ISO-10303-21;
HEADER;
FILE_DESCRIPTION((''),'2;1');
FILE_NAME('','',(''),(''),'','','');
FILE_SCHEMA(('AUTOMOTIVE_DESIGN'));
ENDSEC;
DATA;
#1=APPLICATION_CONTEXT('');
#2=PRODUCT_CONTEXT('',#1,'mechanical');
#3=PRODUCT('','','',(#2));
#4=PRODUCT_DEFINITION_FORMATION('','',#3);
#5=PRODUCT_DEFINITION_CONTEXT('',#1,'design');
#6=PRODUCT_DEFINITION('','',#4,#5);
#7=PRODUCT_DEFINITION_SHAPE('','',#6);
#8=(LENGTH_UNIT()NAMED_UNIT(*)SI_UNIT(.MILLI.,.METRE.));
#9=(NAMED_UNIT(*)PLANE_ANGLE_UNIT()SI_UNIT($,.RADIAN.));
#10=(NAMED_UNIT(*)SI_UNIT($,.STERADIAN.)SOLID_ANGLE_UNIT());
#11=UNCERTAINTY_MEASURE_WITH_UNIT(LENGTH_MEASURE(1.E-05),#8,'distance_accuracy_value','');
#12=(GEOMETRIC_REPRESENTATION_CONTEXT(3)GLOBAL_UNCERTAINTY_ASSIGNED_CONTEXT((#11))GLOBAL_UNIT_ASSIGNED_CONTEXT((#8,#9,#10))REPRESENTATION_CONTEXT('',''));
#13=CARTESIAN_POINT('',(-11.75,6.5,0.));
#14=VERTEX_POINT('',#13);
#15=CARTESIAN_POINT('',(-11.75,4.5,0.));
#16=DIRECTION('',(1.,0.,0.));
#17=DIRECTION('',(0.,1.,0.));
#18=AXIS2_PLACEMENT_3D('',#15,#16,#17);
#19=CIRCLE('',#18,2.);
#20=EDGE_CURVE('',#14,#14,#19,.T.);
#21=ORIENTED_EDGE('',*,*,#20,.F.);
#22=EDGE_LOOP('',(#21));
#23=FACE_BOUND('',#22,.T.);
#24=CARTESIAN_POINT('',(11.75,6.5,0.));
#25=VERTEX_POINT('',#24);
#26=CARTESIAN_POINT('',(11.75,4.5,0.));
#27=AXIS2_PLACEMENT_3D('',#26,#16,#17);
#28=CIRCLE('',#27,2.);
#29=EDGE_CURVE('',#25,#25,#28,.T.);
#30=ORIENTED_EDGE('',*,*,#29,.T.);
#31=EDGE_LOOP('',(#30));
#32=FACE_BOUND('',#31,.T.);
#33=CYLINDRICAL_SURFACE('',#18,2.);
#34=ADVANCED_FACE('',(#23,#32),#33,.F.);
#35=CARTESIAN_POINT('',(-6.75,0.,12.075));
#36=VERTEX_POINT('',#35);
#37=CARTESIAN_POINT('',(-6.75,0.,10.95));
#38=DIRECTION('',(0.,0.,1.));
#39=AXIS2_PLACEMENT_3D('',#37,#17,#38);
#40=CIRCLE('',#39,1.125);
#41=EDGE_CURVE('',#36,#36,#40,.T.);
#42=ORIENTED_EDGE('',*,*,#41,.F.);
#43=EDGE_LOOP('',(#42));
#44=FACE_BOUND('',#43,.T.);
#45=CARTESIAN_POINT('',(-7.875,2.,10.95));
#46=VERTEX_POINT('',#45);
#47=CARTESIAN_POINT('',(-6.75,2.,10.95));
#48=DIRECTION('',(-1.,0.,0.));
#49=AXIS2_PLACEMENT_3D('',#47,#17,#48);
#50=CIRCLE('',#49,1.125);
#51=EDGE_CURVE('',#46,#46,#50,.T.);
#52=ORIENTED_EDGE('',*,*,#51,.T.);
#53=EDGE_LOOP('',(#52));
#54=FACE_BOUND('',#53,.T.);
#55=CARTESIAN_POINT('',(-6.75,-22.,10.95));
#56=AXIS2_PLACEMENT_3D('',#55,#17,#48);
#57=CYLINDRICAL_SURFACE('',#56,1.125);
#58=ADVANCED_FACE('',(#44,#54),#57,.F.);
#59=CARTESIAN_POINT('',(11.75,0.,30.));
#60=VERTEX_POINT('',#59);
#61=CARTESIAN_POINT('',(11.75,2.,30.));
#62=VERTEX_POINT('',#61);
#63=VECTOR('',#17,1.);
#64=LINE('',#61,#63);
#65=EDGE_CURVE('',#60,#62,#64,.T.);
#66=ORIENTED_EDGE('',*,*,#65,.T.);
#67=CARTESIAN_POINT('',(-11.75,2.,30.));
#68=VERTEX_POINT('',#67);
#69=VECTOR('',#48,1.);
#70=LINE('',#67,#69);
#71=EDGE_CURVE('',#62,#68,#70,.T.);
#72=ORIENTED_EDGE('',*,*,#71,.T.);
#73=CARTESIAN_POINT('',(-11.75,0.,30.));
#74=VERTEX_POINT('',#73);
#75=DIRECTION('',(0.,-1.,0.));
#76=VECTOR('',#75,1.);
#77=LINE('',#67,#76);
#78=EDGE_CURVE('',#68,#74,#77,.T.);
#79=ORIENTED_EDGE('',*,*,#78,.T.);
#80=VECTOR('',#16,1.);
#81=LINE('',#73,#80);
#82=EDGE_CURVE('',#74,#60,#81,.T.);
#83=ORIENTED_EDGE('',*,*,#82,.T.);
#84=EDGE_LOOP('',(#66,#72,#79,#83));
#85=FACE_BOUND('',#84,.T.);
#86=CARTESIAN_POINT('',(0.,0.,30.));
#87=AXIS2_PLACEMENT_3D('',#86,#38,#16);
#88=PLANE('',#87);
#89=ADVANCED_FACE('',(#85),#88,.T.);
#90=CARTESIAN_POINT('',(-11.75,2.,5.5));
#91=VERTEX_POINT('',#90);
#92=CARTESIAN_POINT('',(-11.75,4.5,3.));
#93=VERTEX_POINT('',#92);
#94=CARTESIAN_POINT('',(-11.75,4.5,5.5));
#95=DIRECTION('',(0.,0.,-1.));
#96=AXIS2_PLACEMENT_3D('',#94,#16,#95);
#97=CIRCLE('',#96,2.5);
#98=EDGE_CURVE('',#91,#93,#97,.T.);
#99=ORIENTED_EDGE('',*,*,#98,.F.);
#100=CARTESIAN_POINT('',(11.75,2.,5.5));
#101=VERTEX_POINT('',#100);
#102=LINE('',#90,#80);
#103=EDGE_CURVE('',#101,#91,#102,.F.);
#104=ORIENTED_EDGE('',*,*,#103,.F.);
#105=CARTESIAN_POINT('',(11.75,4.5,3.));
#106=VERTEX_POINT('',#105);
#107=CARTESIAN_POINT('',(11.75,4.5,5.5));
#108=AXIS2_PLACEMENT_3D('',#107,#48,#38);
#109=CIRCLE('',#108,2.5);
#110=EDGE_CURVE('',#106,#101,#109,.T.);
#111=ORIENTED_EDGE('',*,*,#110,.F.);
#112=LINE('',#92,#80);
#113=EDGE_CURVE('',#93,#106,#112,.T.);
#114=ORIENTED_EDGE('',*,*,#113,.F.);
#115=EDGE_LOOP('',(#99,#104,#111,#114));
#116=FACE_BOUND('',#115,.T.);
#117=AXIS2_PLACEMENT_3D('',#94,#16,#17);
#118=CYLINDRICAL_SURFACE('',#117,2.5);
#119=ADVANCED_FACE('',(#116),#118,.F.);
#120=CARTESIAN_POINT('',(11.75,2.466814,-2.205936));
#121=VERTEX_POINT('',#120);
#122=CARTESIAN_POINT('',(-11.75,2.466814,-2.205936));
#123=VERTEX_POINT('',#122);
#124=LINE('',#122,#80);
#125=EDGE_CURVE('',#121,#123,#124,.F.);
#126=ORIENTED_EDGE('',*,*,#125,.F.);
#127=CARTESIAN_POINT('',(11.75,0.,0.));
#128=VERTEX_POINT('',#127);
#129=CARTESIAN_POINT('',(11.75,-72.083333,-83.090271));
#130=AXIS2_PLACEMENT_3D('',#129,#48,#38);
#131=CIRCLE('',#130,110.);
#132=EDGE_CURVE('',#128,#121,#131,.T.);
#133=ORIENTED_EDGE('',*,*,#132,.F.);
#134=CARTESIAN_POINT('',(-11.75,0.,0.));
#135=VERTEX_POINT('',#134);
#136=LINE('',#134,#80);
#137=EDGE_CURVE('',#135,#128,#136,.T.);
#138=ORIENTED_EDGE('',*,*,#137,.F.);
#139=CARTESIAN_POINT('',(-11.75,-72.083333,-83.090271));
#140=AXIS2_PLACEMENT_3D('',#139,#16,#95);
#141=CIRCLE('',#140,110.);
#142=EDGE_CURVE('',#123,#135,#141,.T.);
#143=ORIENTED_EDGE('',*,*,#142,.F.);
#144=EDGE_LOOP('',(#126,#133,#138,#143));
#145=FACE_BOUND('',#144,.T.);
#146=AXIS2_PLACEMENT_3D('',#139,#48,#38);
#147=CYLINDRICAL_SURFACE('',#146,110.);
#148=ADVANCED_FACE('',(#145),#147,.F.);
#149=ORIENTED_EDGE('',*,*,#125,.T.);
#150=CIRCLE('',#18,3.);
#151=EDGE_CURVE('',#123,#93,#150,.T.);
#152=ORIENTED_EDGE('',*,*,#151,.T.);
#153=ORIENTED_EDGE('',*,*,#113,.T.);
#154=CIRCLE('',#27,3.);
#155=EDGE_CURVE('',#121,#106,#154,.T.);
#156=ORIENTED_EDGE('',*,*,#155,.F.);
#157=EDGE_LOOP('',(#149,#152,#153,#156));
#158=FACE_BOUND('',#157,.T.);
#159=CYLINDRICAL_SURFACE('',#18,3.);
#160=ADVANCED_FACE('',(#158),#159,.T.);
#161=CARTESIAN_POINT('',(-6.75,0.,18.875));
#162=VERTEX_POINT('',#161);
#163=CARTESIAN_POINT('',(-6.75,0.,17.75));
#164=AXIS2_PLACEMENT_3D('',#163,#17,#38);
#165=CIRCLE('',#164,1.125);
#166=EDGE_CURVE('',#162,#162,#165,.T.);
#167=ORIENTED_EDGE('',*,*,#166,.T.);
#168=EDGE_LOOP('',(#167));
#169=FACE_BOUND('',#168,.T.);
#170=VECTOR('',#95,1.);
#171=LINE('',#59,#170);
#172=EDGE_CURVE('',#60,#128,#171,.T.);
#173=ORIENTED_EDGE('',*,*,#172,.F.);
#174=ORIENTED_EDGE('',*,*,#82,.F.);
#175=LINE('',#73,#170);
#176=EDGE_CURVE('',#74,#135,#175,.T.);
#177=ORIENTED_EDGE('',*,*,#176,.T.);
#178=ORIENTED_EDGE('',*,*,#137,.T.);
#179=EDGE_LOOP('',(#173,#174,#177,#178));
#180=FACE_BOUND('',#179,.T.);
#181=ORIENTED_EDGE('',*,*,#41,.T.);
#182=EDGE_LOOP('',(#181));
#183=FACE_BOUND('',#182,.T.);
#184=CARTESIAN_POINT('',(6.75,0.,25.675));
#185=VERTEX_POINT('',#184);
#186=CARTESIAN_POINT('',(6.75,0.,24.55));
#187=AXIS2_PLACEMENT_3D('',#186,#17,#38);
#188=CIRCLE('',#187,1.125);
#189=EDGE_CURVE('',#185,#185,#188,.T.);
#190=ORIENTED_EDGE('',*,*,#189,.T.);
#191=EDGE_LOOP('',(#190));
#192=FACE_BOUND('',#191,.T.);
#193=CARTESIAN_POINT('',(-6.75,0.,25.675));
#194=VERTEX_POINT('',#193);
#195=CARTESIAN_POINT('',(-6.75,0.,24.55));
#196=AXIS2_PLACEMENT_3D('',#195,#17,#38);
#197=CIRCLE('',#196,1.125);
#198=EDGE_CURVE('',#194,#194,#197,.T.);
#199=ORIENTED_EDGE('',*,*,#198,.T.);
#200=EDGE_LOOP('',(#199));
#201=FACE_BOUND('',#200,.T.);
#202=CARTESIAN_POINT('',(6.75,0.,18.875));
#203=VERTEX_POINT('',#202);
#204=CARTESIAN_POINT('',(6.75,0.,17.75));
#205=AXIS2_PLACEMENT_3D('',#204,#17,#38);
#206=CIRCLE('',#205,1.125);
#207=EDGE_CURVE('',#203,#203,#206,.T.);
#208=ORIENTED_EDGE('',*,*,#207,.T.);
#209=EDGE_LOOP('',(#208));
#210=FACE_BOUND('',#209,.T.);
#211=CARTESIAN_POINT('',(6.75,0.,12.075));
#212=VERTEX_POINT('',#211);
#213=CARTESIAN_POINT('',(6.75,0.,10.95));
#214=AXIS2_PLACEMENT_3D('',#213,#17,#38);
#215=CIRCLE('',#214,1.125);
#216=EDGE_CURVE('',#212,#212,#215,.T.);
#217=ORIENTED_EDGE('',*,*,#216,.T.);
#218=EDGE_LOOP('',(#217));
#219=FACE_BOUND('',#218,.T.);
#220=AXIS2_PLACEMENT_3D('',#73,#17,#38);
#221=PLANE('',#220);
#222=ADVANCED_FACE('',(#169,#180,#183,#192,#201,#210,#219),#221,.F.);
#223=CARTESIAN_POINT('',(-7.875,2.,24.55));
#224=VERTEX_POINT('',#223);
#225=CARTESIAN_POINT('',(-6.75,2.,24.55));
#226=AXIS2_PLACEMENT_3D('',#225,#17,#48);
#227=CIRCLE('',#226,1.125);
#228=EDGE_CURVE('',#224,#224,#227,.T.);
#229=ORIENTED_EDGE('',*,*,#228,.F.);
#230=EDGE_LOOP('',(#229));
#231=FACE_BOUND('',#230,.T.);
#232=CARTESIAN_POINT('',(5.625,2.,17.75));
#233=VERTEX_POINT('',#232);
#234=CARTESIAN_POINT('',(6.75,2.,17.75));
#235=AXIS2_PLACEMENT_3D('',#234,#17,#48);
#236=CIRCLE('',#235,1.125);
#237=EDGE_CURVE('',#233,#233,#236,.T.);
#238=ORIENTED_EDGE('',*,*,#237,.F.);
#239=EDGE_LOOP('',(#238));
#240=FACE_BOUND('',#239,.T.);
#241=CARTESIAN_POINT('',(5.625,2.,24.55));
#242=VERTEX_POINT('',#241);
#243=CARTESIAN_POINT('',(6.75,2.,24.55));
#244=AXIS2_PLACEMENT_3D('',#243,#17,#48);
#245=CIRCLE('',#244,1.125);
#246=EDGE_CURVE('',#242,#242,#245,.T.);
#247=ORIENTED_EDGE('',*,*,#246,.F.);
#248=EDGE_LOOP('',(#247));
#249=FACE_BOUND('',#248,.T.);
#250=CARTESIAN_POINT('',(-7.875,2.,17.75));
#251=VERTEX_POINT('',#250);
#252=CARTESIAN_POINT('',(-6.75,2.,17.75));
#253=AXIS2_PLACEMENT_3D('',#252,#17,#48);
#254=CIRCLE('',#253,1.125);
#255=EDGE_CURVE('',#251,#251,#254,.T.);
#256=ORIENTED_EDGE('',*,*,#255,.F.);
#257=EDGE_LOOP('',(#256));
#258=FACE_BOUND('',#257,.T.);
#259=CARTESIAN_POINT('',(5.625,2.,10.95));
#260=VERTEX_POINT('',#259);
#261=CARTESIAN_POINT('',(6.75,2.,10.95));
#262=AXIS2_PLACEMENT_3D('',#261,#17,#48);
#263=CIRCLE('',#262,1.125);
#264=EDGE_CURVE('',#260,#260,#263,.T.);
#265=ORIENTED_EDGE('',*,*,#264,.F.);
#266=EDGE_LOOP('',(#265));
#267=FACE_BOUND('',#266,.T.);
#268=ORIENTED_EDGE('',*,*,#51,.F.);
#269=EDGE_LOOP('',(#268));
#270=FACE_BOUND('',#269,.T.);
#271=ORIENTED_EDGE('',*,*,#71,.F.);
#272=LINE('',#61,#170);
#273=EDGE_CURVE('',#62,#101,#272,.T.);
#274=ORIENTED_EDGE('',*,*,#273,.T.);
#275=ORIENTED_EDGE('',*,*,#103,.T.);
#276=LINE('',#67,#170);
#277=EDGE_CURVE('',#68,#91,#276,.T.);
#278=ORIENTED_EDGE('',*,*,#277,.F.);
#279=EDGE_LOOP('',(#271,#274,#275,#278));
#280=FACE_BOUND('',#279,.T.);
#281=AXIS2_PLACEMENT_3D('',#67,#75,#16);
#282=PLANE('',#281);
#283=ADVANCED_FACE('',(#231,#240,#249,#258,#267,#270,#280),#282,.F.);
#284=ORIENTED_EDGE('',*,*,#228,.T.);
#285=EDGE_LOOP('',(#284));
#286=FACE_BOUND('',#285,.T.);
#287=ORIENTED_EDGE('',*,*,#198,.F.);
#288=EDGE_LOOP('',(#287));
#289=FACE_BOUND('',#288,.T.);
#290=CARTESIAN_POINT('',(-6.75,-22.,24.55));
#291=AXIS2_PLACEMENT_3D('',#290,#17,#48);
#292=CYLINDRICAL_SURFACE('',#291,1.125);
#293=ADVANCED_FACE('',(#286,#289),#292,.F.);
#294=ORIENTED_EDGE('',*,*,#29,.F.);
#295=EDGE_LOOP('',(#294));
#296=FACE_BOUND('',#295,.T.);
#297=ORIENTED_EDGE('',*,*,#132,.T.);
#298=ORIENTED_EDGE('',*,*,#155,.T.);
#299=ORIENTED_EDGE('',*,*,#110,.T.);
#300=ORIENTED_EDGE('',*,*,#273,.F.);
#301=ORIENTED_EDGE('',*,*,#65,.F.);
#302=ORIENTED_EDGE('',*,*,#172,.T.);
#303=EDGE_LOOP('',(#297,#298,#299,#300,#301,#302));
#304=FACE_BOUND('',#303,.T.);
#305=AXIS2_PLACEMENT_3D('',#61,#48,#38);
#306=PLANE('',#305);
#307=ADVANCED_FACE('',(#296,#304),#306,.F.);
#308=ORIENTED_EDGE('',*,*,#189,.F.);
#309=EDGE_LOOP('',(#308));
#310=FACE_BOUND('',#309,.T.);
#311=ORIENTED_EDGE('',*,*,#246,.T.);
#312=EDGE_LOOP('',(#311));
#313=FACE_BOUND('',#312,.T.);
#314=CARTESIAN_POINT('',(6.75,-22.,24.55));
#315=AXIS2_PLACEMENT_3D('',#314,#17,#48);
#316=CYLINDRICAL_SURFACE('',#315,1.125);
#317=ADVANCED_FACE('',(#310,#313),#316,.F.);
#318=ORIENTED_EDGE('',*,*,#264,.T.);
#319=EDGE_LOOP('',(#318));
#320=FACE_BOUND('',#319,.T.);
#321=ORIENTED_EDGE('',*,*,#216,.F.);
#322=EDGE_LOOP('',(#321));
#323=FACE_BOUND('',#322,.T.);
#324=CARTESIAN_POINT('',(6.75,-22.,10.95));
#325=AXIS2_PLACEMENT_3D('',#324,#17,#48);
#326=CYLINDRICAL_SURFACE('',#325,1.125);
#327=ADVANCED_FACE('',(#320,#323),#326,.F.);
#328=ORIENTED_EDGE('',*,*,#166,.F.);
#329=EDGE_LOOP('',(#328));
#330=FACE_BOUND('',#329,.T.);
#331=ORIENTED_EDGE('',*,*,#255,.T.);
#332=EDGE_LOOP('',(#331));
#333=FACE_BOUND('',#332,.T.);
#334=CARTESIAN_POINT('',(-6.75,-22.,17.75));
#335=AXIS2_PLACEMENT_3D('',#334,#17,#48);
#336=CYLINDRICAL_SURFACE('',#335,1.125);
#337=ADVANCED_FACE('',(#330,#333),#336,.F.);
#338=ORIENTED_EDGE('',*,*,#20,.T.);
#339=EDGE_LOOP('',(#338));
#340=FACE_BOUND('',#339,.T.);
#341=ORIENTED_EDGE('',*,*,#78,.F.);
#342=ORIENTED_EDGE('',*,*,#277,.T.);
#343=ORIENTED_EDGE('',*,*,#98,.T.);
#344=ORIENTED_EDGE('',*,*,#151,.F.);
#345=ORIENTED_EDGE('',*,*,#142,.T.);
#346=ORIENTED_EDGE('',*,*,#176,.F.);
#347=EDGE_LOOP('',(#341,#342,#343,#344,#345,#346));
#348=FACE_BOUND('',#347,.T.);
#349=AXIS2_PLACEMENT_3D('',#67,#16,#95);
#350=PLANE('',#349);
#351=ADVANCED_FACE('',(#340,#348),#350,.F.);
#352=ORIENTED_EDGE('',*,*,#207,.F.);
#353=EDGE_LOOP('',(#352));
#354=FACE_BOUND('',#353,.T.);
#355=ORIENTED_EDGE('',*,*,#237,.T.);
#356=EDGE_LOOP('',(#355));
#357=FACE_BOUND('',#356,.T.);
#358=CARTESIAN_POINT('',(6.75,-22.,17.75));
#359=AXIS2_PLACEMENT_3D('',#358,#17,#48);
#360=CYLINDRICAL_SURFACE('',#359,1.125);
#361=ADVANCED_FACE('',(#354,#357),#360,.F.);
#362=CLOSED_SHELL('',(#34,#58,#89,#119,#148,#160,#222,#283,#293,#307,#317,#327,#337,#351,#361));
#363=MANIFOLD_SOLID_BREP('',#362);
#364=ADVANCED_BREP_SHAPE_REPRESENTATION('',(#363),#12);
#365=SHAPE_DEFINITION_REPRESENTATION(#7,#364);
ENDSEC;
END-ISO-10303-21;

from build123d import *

# Parameters (mm, degrees)
SKETCH1_W           = 23.5
SKETCH1_H           = 2
BOSS_EXTRUDE1_DEPTH = 30
SKETCH2_R           = 3
SKETCH2_R_2         = 2
BOSS_EXTRUDE2_DEPTH = 23.5
FILLET1_R           = 110
FILLET2_R           = 2.5
SKETCH3_R           = 1.125
CUT_EXTRUDE1_DEPTH  = 24


with BuildPart() as part:
    # Sketch1 → Boss-Extrude1 (new body)
    with BuildSketch(Plane.XY):
        with Locations((0, 1)):
            Rectangle(SKETCH1_W, SKETCH1_H)
    extrude(amount=BOSS_EXTRUDE1_DEPTH)

    # Sketch2 → Boss-Extrude2 (add)
    with BuildSketch(Plane(origin=(11.75, 0, 0), x_dir=(0, 0, -1), z_dir=(1, 0, 0))):
        with Locations((0, 4.5)):
            Circle(SKETCH2_R)
        with Locations(Location((0, 4.5, 0), (0, 0, 90))):
            Circle(SKETCH2_R_2, mode=Mode.SUBTRACT)
    extrude(amount=-BOSS_EXTRUDE2_DEPTH)

    # Fillet1
    # the kernel refuses this fillet: 110 mm, written as the material it adds along each edge
    with BuildSketch(Plane(origin=(-11.75, 1.5, 0), x_dir=(0, -1, 0), z_dir=(1, 0, 0))) as fillet1_piece_1:
        with BuildLine():
            CenterArc((73.583333333, 83.090270523), FILLET1_R, 227.333597139, 1.723771549)
            ThreePointArc((-0.966814159, 2.205936386), (-0.252313926, 1.204251319), (0, 0))
            Line((0, 0), (1.5, 0))
        make_face()
    extrude(amount=23.5)

    # Fillet2
    fillet2_edges = [part.edges().sort_by_distance(p)[0] for p in [
        (0, 2, 1.658312395),
    ]]
    fillet(fillet2_edges, radius=FILLET2_R)

    # Sketch3 → Cut-Extrude1 (cut)
    with BuildSketch(Plane(origin=(0, 2, 0), x_dir=(1, 0, 0), z_dir=(0, 1, 0))):
        with Locations(Location((-6.75, -10.95, 0), (0, 0, 180))):
            Circle(SKETCH3_R)
        with Locations(Location((-6.75, -17.75, 0), (0, 0, 180))):
            Circle(SKETCH3_R)
        with Locations(Location((-6.75, -24.55, 0), (0, 0, 180))):
            Circle(SKETCH3_R)
        with Locations(Location((6.75, -24.55, 0), (0, 0, 180))):
            Circle(SKETCH3_R)
        with Locations(Location((6.75, -17.75, 0), (0, 0, 180))):
            Circle(SKETCH3_R)
        with Locations(Location((6.75, -10.95, 0), (0, 0, 180))):
            Circle(SKETCH3_R)
    extrude(amount=-CUT_EXTRUDE1_DEPTH, mode=Mode.SUBTRACT)


solid = part.part
